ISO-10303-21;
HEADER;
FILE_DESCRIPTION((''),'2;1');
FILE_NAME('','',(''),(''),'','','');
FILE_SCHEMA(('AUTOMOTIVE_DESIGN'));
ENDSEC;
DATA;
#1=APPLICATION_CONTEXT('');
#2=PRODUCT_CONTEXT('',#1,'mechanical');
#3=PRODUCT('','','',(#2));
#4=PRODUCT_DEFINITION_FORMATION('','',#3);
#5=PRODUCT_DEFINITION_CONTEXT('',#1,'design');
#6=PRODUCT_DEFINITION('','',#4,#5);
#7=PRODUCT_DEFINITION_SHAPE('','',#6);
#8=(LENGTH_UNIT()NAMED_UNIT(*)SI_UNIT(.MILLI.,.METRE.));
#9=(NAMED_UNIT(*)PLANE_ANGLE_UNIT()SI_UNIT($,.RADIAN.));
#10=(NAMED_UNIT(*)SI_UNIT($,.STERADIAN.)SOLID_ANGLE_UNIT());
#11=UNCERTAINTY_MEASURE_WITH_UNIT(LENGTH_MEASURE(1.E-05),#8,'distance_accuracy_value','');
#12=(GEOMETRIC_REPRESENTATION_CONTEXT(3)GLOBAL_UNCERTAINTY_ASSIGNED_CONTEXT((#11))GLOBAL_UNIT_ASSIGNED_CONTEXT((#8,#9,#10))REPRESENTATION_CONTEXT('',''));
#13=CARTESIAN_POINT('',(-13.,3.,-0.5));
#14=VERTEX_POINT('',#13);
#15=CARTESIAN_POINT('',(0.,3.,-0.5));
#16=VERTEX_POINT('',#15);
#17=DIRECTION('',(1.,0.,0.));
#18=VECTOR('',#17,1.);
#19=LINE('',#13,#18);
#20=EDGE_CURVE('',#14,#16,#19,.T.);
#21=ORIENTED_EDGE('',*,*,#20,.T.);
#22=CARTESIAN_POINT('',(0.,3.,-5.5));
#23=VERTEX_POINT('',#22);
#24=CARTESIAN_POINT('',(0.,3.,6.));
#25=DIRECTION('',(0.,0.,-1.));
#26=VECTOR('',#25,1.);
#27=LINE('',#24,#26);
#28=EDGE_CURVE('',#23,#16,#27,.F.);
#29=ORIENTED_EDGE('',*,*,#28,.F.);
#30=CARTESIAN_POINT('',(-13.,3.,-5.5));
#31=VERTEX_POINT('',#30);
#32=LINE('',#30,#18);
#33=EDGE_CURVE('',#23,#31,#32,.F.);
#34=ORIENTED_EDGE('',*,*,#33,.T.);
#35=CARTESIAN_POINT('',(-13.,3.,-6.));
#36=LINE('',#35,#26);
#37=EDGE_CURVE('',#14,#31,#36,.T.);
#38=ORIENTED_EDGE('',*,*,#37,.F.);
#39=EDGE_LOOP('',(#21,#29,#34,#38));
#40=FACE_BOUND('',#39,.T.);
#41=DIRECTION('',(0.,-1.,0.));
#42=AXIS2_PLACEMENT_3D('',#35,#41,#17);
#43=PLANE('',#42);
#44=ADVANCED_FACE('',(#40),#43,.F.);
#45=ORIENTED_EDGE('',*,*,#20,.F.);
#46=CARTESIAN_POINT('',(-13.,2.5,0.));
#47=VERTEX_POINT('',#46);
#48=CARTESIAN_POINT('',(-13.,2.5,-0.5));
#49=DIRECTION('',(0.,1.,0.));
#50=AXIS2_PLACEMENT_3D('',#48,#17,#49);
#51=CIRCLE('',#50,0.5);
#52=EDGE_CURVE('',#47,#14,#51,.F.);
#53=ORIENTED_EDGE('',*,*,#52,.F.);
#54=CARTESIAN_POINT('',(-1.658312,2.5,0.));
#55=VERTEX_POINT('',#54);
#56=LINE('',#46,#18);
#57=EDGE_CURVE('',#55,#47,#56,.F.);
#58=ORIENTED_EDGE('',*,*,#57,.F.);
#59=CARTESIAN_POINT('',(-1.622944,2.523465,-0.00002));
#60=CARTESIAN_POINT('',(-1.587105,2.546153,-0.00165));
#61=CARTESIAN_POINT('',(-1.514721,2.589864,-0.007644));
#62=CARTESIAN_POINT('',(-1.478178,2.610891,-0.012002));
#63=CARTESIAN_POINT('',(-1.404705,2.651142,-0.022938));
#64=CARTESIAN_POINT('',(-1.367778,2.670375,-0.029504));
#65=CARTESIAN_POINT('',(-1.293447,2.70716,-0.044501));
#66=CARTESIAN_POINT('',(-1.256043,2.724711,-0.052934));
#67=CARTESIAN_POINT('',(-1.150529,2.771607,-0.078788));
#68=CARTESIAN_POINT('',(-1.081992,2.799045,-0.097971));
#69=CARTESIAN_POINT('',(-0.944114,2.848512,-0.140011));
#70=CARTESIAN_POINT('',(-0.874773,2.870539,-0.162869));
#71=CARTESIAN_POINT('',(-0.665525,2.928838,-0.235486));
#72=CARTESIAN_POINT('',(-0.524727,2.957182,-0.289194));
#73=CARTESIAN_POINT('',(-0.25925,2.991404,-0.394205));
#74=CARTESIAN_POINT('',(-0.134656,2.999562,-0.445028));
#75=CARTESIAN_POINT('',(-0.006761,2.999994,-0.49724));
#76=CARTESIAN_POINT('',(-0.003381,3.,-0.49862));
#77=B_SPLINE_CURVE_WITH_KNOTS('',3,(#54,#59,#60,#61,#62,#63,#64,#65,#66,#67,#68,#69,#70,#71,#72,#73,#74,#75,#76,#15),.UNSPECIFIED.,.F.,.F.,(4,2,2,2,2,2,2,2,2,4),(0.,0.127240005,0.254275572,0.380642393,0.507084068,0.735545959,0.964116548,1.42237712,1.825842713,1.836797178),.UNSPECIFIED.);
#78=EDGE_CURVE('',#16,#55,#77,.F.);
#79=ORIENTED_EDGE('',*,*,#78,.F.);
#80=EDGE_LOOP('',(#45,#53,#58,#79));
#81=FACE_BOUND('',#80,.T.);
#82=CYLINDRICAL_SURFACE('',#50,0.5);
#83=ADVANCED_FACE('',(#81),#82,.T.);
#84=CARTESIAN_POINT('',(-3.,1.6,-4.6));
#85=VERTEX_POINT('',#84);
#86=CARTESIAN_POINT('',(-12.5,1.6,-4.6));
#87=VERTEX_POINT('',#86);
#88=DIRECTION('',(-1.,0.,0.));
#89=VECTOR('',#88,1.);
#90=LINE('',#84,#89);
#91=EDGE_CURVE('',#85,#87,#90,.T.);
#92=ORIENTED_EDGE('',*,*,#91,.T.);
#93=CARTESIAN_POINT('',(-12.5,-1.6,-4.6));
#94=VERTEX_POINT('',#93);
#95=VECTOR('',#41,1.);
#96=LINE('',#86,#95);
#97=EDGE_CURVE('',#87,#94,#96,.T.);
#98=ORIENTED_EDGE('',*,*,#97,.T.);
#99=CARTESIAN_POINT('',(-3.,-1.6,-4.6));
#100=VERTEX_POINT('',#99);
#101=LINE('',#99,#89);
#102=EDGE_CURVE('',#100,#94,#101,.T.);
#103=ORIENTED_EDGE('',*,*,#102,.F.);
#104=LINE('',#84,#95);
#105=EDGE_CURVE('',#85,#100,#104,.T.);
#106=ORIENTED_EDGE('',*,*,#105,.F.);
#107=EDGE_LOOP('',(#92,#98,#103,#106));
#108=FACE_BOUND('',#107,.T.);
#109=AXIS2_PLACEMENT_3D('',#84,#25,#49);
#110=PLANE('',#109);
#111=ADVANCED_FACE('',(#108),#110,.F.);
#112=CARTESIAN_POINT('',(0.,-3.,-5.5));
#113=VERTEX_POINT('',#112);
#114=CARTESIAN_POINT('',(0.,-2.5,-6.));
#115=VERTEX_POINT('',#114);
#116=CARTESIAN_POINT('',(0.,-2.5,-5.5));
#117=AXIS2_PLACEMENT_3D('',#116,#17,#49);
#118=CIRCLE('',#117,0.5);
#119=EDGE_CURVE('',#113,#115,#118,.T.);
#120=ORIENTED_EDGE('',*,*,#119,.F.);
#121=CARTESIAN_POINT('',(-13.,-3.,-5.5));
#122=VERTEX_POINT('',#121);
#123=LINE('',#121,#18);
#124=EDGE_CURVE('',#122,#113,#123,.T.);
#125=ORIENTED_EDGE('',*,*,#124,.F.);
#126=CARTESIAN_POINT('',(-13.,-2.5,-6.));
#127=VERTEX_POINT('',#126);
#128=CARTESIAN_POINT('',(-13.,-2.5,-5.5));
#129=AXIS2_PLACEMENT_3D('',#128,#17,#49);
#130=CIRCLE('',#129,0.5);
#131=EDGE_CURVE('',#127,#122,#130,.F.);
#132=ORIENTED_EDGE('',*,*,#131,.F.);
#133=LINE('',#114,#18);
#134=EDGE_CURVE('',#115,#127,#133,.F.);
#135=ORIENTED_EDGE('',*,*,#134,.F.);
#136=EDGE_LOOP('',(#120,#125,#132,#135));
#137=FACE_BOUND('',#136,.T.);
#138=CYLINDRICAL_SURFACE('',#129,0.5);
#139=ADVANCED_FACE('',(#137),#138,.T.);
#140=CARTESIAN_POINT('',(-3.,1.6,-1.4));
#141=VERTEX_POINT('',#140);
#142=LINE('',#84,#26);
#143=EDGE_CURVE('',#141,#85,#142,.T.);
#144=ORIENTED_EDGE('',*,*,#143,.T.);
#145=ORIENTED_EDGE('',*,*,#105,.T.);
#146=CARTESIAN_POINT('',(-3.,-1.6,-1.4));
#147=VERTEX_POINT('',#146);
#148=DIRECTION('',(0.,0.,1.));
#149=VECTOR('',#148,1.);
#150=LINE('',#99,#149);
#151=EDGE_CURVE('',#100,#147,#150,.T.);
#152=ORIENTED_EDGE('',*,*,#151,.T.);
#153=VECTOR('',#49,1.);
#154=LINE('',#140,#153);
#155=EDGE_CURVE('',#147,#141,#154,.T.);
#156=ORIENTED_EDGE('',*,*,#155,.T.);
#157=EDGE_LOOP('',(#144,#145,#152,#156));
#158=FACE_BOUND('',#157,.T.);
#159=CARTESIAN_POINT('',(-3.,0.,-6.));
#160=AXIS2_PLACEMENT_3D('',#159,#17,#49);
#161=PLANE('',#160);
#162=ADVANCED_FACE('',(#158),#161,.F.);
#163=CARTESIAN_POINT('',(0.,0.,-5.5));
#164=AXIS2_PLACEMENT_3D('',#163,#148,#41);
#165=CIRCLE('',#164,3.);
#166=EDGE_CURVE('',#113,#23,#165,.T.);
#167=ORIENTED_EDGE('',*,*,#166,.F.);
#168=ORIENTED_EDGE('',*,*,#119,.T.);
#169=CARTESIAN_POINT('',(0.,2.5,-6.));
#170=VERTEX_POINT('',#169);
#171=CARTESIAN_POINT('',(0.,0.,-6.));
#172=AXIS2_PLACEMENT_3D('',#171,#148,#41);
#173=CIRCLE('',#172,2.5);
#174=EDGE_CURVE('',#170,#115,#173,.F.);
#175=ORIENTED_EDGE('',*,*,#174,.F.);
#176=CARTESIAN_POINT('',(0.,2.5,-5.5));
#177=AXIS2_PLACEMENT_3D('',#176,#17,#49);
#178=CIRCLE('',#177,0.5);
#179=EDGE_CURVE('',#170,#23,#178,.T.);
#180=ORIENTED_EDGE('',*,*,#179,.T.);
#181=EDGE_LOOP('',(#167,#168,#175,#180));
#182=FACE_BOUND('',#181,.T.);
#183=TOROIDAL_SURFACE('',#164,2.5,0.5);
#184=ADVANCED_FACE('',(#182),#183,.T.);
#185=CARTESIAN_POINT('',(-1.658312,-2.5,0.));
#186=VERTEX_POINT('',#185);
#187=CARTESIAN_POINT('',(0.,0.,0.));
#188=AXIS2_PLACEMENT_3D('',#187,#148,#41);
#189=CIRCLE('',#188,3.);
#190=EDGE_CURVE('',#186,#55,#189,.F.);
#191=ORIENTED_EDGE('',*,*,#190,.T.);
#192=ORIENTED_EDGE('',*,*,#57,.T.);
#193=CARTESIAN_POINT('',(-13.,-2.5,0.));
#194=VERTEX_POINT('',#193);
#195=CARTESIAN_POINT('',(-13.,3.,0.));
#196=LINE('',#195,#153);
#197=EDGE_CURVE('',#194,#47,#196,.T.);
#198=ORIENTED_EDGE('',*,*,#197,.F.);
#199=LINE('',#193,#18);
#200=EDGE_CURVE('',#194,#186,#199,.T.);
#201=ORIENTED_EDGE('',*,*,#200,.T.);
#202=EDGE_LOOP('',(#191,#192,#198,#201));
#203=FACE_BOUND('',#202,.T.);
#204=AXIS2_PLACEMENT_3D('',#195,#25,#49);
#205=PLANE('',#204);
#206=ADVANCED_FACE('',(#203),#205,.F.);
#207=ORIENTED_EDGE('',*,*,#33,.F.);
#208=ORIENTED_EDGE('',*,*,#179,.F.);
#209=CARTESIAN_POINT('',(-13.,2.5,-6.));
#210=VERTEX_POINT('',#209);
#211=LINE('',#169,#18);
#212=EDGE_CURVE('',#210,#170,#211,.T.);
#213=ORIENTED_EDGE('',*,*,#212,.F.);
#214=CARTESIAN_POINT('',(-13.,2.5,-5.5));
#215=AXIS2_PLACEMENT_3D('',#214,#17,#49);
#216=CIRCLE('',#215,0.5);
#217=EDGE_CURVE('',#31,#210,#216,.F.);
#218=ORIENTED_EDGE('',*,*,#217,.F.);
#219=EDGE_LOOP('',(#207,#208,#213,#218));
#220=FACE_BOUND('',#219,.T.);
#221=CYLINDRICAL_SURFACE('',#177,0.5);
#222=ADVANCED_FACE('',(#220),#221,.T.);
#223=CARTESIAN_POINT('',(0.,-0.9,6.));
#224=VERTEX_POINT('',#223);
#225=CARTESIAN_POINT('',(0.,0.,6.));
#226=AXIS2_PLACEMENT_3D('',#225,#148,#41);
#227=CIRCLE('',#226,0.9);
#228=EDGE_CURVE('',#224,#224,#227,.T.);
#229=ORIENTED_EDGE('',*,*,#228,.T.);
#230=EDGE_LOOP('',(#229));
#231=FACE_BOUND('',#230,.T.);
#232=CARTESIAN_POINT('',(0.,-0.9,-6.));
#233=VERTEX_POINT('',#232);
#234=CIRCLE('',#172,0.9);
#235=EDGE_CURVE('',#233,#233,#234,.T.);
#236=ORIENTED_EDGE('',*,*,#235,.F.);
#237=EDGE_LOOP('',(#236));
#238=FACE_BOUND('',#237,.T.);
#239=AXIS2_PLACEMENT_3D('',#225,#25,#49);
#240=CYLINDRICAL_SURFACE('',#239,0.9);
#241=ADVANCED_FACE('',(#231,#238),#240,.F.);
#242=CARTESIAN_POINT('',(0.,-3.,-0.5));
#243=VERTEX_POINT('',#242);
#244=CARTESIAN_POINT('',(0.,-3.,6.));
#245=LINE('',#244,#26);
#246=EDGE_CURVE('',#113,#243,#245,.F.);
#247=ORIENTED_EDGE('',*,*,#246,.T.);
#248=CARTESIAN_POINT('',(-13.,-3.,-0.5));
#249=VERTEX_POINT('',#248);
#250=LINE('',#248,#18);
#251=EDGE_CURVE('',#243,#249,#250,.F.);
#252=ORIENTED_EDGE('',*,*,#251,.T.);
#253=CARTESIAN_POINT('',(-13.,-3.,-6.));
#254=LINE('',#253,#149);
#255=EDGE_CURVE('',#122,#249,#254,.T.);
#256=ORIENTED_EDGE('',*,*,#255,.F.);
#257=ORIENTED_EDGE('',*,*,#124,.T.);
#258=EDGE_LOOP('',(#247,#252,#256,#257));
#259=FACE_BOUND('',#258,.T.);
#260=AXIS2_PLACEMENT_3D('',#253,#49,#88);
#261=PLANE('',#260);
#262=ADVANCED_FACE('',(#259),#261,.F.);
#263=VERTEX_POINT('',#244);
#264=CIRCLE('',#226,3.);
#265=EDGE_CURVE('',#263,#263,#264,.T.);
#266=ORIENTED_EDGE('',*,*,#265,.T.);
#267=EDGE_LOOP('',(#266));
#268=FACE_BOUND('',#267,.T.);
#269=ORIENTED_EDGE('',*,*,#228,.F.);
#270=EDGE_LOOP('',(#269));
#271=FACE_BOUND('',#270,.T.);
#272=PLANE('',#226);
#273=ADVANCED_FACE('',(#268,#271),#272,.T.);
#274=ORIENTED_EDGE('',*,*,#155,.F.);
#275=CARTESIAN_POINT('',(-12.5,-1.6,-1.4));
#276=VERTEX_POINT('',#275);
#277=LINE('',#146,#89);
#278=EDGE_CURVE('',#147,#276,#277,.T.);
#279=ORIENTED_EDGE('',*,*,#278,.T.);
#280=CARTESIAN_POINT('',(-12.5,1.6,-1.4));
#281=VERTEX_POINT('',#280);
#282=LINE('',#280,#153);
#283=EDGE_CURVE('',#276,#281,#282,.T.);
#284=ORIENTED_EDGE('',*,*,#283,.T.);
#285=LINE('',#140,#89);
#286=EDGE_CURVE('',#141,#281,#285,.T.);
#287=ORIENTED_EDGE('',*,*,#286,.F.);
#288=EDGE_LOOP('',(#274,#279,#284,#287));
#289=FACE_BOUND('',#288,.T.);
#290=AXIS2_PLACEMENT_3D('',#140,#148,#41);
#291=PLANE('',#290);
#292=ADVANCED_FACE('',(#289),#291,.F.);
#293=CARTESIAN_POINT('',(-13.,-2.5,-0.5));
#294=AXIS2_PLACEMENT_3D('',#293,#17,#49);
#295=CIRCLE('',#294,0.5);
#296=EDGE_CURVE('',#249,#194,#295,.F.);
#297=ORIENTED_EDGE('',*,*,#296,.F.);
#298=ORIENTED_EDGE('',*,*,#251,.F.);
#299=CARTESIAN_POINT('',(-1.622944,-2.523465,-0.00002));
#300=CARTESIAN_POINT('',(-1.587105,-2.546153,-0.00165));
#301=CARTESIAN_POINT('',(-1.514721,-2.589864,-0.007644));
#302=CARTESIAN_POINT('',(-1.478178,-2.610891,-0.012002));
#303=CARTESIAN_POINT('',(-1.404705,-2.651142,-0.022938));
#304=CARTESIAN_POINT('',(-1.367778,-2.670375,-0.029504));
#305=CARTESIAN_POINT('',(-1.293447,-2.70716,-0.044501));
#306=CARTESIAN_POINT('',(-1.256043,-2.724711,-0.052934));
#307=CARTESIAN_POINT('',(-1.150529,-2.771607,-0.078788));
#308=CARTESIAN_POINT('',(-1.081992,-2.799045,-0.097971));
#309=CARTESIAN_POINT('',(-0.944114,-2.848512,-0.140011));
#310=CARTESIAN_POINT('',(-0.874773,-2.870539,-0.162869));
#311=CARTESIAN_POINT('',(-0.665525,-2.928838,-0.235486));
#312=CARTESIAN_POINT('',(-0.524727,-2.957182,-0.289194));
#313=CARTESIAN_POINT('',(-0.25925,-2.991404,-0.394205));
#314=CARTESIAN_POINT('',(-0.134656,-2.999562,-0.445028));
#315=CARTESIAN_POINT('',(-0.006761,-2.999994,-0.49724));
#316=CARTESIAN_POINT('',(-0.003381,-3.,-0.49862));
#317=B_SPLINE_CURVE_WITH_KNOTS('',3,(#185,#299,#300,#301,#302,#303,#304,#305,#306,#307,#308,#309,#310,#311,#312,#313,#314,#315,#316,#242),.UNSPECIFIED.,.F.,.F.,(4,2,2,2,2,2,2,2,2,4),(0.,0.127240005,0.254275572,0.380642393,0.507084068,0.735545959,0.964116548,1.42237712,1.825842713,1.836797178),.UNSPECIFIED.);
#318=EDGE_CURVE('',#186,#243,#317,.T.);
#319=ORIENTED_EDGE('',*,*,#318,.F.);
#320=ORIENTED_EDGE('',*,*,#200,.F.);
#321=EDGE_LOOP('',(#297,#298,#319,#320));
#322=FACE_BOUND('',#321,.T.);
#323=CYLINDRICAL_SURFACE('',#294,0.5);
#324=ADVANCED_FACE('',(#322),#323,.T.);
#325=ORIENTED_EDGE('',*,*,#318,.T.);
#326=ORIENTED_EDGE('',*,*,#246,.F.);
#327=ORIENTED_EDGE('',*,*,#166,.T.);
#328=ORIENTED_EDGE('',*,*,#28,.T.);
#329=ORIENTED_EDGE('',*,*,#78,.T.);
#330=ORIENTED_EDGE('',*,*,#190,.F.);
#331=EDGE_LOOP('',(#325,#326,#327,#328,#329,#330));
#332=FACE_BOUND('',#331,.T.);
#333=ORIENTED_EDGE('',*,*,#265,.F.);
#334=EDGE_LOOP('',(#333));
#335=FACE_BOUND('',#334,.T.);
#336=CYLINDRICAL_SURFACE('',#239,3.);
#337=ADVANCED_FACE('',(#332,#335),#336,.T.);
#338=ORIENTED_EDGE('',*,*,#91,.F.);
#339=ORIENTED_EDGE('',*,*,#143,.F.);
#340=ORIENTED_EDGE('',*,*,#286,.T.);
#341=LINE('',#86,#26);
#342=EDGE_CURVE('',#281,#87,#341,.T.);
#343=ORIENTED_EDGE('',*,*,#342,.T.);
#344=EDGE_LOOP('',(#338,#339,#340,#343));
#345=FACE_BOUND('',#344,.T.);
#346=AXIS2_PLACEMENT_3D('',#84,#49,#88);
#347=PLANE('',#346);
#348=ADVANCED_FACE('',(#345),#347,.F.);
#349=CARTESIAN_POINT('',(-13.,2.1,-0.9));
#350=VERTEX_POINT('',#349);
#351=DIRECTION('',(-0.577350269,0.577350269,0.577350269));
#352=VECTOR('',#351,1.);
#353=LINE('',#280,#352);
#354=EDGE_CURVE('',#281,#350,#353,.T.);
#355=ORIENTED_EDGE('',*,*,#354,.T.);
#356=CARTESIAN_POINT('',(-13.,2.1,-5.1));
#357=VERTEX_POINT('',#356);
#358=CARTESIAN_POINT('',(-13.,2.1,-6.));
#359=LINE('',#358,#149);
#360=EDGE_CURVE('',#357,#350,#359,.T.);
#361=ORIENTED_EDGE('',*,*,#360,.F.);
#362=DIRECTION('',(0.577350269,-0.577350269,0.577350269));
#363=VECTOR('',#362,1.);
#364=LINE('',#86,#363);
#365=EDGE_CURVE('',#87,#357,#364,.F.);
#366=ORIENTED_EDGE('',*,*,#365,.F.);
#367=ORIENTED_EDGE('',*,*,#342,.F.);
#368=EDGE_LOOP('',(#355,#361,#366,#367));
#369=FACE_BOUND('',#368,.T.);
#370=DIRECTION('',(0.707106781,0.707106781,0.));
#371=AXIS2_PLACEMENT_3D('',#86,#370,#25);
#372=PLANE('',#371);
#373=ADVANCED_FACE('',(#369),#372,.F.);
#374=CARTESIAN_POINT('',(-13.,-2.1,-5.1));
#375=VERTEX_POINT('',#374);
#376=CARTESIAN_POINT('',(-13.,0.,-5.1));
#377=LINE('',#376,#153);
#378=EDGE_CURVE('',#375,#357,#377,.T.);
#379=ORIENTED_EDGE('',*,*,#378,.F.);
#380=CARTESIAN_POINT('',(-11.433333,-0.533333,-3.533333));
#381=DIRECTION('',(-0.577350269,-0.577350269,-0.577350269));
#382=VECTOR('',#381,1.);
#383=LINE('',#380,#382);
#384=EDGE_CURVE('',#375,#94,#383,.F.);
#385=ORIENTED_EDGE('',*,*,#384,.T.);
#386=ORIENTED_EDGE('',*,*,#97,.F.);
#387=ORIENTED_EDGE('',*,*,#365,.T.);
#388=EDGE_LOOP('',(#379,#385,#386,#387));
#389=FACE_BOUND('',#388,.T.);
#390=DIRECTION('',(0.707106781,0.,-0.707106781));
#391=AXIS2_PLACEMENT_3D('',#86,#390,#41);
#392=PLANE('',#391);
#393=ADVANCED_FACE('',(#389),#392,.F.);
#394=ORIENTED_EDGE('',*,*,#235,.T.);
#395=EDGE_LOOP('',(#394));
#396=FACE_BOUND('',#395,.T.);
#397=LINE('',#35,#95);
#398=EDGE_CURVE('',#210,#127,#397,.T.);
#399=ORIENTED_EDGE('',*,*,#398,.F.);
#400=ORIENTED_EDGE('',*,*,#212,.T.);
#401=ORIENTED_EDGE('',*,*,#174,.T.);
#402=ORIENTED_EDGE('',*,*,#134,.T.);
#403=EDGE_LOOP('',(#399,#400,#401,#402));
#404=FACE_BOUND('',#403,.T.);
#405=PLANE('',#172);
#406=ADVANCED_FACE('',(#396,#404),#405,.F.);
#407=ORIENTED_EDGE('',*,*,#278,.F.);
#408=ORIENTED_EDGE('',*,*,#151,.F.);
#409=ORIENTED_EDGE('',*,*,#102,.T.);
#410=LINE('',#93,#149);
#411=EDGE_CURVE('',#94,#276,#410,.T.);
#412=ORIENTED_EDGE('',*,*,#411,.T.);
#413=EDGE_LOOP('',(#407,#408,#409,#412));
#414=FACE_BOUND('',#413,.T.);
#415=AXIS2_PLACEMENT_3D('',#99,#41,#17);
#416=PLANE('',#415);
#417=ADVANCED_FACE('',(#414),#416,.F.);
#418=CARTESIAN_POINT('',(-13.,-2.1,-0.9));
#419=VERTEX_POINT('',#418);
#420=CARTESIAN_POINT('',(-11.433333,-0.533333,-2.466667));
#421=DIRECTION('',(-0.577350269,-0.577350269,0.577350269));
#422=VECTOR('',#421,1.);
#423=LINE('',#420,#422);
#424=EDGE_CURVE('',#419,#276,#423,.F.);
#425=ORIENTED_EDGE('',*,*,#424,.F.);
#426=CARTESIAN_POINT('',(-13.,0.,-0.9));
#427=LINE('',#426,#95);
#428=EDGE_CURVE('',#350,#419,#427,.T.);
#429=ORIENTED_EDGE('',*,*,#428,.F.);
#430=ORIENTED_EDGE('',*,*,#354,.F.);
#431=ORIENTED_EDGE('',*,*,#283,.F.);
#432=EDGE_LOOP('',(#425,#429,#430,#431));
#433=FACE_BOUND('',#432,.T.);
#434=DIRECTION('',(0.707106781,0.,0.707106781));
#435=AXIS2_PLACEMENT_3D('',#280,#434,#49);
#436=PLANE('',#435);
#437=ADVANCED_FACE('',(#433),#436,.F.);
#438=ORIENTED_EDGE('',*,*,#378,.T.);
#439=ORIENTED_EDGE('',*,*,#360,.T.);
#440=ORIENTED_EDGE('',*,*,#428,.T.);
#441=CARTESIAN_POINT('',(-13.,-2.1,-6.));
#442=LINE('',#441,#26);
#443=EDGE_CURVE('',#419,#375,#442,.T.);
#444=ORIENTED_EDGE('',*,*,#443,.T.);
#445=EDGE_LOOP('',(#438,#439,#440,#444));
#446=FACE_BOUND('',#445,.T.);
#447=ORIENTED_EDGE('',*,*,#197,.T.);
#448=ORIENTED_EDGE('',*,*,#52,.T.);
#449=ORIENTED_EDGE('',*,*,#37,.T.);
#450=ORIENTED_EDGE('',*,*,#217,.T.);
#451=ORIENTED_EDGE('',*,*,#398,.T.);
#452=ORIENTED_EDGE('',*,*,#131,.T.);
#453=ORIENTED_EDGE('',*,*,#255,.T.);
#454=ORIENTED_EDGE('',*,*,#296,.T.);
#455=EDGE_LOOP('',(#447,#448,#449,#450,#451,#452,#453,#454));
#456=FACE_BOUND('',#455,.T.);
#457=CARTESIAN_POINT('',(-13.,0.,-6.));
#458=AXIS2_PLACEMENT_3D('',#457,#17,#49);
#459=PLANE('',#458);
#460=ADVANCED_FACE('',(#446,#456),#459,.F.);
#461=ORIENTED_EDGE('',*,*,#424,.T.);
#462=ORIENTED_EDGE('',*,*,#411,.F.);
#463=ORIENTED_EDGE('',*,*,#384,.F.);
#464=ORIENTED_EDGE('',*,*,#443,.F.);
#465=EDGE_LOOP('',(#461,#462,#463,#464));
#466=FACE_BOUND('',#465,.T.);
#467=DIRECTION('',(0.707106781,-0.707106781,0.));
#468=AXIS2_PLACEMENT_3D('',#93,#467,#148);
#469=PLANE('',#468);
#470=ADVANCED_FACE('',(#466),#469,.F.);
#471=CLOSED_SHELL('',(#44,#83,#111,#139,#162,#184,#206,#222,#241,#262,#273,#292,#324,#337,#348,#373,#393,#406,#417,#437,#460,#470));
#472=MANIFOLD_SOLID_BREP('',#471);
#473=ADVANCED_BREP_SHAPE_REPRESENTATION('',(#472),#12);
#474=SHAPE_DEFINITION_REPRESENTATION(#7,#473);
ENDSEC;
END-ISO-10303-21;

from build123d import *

# Parameters (mm, degrees)
SKETCH3_R             = 3
SKETCH3_R_2           = 0.9
BOSS_EXTRUDE1_DEPTH   = 12
BOSS_EXTRUDE2_DEPTH   = 6
SKETCH5_W             = 3.2
SKETCH5_H             = 3.2
CUT_EXTRUDE1_DEPTH    = 10
FILLET1_R             = 0.5
CHAMFER1_SIZE         = 0.5
BODY_MOVE_COPY1_ANGLE = 90


with BuildPart() as part:
    # Sketch3 → Boss-Extrude1 (new body)
    with BuildSketch(Plane(origin=(0, 0, 0), x_dir=(1, 0, 0), z_dir=(0, 1, 0))):
        with Locations(Location((0, 0, 0), (0, 0, 270))):
            Circle(SKETCH3_R)
        with Locations(Location((0, 0, 0), (0, 0, 270))):
            Circle(SKETCH3_R_2, mode=Mode.SUBTRACT)
    extrude(amount=BOSS_EXTRUDE1_DEPTH)

    # Boss-Extrude2: read off the stored shape, not the designer's step
    # Boss-Extrude2 outline → Boss-Extrude2 (add)
    with BuildSketch(Plane(origin=(0, 0, 0), x_dir=(1, 0, 0), z_dir=(0, 1, 0))):
        with BuildLine():
            Line((-13, -3), (0, -3))
            ThreePointArc((0, -3), (-3, 0), (0, 3))
            Line((0, 3), (-13, 3))
            Line((-13, 3), (-13, -3))
        make_face()
    extrude(amount=BOSS_EXTRUDE2_DEPTH)

    # Sketch5 → Cut-Extrude1 (cut)
    with BuildSketch(Plane.ZY.offset(13)):
        with Locations((0, 3)):
            Rectangle(SKETCH5_W, SKETCH5_H)
    extrude(amount=-CUT_EXTRUDE1_DEPTH, mode=Mode.SUBTRACT)

    # Fillet1
    # the kernel refuses this fillet: 0.5 mm, written as the material it takes off along each edge
    with BuildSketch(Plane(origin=(-14.25, 0, 3), x_dir=(0, 0, -1), z_dir=(1, 0, 0)), Plane(origin=(0, 0, -3), x_dir=(0, 0, 1), z_dir=(-1, 0, 0))) as fillet1_piece_1:
        with BuildLine():
            CenterArc((FILLET1_R, FILLET1_R), FILLET1_R, 180, 90)
            Line((0, FILLET1_R), (0, 0))
            Line((0, 0), (FILLET1_R, 0))
        make_face()
    extrude(amount=14.25, mode=Mode.SUBTRACT)
    with BuildSketch(Plane(origin=(-14.25, 6, 3), x_dir=(0, 0, -1), z_dir=(1, 0, 0))) as fillet1_piece_2_section:
        with BuildLine():
            CenterArc((FILLET1_R, -FILLET1_R), FILLET1_R, 90, 90)
            Line((0, -FILLET1_R), (0, 0))
            Line((0, 0), (FILLET1_R, 0))
        make_face()
    fillet1_piece_2 = extrude(amount=16.375, mode=Mode.PRIVATE)
    fillet1_piece_2 = fillet1_piece_2 - Plane(origin=(0, 6, 0), x_dir=(0, 0, 1), z_dir=(0, -1, 0)) * Cylinder(3, 35, mode=Mode.PRIVATE)
    add(fillet1_piece_2, mode=Mode.SUBTRACT)
    with BuildSketch(Plane(origin=(2.125, 6, -3), x_dir=(0, -1, 0), z_dir=(-1, 0, 0))) as fillet1_piece_3_section:
        with BuildLine():
            CenterArc((FILLET1_R, FILLET1_R), FILLET1_R, 180, 90)
            Line((0, FILLET1_R), (0, 0))
            Line((0, 0), (FILLET1_R, 0))
        make_face()
    fillet1_piece_3 = extrude(amount=16.375, mode=Mode.PRIVATE)
    fillet1_piece_3 = fillet1_piece_3 - Plane(origin=(0, 6, 0), x_dir=(0, 0, 1), z_dir=(0, -1, 0)) * Cylinder(3, 35, mode=Mode.PRIVATE)
    add(fillet1_piece_3, mode=Mode.SUBTRACT)
    with BuildSketch(Plane(origin=(0, 0, 0), x_dir=(0, 0, 1), z_dir=(-1, 0, 0))) as fillet1_piece_4:
        with BuildLine():
            CenterArc((3 - FILLET1_R, FILLET1_R), FILLET1_R, 270, 90)
            Line((3 - FILLET1_R, 0), (3, 0))
            Line((3, 0), (3, FILLET1_R))
        make_face()
    revolve(axis=Axis((0, 0, 0), (0, 1, 0)), revolution_arc=180, mode=Mode.SUBTRACT)

    # Chamfer1
    chamfer1_edges = [part.edges().sort_by_distance(p)[0] for p in [
        (-13, 3, 1.6),
        (-13, 4.6, 0),
        (-13, 3, -1.6),
        (-13, 1.4, 0),
    ]]
    chamfer(chamfer1_edges, length=CHAMFER1_SIZE)


with BuildPart() as part_1:
    # Body-Move/Copy1: read off the stored shape, not the designer's step
    # Body-Move/Copy1: moved
    add(part.part.moved(Location((0, -6, 0))).rotate(Axis((0, 0, 0), (1, 0, 0)), BODY_MOVE_COPY1_ANGLE))


solid = part_1.part
